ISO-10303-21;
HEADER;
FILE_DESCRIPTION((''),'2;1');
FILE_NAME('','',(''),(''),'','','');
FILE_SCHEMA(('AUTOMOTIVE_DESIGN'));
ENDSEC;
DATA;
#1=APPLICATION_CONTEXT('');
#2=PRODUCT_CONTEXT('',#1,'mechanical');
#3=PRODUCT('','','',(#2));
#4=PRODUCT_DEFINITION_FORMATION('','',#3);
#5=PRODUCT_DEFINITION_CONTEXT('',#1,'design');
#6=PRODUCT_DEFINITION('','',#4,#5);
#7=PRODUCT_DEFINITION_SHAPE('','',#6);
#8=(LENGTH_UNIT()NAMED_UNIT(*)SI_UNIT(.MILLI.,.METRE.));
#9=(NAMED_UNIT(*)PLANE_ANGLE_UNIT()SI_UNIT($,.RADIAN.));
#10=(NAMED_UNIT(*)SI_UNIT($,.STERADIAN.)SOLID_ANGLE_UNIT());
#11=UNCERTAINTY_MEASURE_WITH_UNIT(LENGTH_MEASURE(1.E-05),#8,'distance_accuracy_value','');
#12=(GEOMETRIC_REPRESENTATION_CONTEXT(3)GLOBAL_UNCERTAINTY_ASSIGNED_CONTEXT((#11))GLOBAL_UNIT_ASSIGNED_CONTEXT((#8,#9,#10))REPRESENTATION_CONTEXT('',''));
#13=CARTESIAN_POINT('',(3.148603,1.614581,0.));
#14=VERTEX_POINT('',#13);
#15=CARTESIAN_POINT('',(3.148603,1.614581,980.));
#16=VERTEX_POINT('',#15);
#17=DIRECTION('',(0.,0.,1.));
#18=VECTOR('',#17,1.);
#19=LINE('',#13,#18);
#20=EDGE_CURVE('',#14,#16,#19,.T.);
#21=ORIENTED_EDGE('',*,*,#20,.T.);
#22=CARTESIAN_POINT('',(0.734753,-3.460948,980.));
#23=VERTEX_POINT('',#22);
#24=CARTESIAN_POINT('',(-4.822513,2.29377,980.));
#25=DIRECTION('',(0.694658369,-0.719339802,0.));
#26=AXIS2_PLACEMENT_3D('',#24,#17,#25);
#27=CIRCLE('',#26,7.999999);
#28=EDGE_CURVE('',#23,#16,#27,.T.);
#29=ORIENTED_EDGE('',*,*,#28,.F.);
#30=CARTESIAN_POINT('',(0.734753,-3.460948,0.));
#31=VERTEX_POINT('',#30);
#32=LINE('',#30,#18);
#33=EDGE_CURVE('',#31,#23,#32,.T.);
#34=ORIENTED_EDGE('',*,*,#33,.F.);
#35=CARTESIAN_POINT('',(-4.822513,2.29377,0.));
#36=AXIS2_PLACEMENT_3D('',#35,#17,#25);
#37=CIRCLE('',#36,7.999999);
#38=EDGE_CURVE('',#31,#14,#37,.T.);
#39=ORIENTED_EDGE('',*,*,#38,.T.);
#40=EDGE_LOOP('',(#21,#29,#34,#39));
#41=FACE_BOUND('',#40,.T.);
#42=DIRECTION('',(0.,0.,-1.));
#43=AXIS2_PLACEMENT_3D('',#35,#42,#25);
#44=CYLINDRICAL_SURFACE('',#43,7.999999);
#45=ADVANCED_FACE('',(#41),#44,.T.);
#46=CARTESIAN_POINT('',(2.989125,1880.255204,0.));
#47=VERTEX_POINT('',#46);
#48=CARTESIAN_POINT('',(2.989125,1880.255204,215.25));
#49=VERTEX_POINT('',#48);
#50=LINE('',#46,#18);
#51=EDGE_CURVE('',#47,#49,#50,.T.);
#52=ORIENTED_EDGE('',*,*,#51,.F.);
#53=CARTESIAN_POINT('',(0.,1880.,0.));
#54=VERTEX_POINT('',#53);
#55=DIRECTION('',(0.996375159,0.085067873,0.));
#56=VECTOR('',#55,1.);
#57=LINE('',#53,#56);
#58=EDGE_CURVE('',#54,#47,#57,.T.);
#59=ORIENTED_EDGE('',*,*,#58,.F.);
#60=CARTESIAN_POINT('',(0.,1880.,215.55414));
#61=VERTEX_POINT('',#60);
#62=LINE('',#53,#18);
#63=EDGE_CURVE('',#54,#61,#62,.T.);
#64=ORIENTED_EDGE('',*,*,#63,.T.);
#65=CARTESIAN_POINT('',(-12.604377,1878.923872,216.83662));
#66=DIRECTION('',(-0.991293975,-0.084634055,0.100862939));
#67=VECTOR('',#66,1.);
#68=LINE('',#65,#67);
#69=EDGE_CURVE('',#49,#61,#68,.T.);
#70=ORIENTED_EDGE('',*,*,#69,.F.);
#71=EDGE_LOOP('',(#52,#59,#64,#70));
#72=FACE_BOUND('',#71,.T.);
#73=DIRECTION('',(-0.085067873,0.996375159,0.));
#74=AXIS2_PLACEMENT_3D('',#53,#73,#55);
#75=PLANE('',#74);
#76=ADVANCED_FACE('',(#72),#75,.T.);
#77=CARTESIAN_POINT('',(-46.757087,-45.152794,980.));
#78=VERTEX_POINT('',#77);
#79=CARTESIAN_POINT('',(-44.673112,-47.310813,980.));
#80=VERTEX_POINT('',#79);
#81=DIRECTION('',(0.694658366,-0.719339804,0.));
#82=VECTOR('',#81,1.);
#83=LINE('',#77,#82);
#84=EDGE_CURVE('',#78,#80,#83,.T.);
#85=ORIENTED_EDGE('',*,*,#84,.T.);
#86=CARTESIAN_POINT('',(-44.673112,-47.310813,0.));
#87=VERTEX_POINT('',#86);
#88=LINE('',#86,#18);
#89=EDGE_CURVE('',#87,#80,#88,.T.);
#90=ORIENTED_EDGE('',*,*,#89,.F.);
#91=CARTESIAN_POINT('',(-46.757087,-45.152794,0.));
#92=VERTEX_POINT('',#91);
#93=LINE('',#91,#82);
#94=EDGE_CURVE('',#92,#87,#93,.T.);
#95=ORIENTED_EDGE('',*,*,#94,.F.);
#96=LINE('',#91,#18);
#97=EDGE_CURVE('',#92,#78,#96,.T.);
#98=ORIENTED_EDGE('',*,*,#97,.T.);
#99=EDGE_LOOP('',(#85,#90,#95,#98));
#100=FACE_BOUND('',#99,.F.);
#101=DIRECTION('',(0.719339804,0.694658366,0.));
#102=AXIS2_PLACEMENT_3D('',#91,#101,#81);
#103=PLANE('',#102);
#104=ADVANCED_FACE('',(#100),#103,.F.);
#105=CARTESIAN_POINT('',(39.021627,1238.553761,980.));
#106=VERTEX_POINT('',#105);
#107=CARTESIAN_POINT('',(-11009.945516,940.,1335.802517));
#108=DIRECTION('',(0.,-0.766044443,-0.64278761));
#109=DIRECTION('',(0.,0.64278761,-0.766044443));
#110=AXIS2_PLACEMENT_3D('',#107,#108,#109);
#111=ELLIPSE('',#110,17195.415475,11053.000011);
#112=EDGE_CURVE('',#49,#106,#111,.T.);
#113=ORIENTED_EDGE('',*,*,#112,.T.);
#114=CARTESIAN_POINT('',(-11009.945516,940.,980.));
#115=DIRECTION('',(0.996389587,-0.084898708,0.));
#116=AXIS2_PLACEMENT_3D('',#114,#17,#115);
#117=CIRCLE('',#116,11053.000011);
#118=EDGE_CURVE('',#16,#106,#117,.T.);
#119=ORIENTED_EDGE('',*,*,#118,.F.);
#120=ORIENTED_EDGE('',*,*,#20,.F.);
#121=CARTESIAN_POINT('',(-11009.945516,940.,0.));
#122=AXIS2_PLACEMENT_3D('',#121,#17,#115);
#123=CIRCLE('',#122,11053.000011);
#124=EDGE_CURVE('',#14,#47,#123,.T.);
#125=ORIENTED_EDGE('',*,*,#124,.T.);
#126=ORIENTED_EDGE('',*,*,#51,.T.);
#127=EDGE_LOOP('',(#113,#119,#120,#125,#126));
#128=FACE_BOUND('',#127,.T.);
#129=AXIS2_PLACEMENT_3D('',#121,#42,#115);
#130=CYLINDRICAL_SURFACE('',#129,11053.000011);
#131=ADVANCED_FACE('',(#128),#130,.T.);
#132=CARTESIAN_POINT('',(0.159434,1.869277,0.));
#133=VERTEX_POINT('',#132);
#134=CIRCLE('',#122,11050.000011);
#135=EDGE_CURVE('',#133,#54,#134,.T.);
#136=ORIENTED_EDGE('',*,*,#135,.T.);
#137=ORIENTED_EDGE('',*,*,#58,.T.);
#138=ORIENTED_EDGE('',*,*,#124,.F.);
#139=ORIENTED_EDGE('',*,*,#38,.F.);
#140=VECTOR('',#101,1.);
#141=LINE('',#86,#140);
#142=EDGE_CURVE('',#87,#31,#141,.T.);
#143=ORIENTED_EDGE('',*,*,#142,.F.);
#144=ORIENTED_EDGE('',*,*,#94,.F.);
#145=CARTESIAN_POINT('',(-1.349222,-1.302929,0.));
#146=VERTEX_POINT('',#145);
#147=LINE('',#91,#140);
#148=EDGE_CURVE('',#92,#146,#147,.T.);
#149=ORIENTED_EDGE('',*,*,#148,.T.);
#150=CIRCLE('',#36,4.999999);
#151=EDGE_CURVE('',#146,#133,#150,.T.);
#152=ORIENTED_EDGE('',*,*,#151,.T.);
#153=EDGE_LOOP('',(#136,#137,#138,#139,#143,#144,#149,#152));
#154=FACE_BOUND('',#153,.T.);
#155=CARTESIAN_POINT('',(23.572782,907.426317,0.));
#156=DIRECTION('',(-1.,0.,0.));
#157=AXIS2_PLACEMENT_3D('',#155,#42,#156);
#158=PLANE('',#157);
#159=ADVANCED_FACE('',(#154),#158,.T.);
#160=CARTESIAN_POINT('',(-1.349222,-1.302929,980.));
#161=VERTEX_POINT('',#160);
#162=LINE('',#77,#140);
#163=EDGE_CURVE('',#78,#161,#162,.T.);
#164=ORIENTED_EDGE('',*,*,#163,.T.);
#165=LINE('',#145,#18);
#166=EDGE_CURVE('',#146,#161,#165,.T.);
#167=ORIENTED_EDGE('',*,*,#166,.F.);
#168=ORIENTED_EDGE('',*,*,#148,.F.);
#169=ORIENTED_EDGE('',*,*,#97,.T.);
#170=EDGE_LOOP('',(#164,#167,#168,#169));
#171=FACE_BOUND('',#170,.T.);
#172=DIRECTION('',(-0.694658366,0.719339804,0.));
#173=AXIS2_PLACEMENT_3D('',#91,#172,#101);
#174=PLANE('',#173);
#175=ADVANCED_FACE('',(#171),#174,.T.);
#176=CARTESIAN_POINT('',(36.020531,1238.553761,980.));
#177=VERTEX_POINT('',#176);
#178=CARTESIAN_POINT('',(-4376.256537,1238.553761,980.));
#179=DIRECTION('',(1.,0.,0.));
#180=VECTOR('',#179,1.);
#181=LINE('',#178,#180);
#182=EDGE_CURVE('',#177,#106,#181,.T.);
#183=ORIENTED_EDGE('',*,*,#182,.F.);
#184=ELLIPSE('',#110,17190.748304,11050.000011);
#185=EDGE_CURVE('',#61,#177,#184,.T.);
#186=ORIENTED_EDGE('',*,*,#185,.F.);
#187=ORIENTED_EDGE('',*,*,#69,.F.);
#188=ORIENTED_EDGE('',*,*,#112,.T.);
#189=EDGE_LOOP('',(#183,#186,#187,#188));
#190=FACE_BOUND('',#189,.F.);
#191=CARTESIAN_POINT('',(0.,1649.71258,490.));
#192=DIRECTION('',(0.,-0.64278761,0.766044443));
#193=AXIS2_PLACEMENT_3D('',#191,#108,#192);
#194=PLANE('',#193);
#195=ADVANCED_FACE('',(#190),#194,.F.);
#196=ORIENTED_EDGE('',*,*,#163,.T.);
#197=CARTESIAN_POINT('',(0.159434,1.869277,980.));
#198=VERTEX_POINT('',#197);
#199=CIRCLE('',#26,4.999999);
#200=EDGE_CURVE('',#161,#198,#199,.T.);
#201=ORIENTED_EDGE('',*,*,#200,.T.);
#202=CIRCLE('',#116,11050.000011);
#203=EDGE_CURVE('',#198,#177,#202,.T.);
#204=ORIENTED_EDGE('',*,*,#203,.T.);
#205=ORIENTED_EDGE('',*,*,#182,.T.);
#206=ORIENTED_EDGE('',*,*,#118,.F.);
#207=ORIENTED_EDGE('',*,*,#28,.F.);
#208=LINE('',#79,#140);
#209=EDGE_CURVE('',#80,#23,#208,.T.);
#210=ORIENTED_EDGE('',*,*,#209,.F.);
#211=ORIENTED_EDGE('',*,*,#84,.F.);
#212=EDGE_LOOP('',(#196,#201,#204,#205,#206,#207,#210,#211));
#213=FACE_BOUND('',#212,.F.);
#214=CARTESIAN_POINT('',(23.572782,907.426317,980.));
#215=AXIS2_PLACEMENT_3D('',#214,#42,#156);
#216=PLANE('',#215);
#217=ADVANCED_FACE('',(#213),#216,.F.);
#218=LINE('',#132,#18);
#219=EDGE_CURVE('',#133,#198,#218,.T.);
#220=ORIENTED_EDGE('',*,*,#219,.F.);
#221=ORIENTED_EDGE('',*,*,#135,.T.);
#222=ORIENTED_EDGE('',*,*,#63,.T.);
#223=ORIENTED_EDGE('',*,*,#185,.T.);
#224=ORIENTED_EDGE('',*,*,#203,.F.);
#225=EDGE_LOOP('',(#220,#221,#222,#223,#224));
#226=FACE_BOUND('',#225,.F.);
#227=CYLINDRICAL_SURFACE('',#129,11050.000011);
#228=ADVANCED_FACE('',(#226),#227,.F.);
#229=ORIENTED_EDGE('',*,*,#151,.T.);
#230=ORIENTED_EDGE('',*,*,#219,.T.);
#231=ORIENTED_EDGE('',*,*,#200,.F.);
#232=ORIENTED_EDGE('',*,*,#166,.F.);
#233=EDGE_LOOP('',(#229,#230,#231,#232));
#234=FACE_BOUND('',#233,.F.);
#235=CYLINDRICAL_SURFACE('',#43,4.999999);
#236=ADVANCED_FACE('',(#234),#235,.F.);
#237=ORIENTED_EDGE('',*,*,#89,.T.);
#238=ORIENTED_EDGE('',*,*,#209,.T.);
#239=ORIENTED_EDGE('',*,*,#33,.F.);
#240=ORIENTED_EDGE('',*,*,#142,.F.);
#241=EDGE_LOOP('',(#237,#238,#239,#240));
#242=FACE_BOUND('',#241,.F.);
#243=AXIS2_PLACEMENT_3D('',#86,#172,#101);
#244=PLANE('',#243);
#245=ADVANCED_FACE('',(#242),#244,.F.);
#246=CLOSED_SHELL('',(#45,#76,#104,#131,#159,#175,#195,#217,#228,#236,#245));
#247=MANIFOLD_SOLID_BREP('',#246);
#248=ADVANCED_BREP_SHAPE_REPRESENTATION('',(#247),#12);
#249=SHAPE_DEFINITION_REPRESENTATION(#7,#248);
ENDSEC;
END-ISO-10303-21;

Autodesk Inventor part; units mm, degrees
ref_plane "YZ Plane" through (0, 0, 0) normal (1, 0, 0) x (0, 1, 0)
ref_plane "XZ Plane" through (0, 0, 0) normal (0, 1, 0) x (-1, 0, 0)
ref_plane "XY Plane" through (0, 0, 0) normal (0, 0, 1) x (1, 0, 0)
sketch "Sketch1" plane through (0, 0, 0) normal (0, 0, 1) x (1, 0, 0)
  line L0 (440.770723, -684.385341) -> (440.770723, -734.385341) construction
  line L1 (0, 47) -> (0, 0) construction
  arc A0 (0.159434, 1.869277) -> (0, 1880) centre (-11009.945504, 940) ccw
  arc A1 (0, 0) -> (0.159434, 1.869277) centre (-11009.945504, 940) ccw construction
  arc A2 (-1.349222, -1.302929) -> (0.159434, 1.869277) centre (-4.822514, 2.29377) ccw
  line L2 (-1.349222, -1.302929) -> (0, 0) construction
  line L3 (-46.757087, -45.152794) -> (-1.349222, -1.302929)
  line L4 (-41.190716, -50.91694) -> (-46.757087, -45.152794) construction
  line L5 (0, 0) -> (0, 1880) construction
  line L6 (0, 0) -> (1.875639, 0) construction
  dimension "d154" = 5
  dimension "d155" = 65
  dimension "d156" = 11050
  dimension "d157" = 136
  dimension "d158" = 1880
contour flange "Contour Flange2" sketch "Sketch1" thickness 3 bend radius 3 width 980 along (0, 0, 1) mid plane no both sides no wall seen from (-24.053155, -23.227861, 0) lies toward (0.6946584, -0.7193398, 0) curves L3 A2 A0
bend "Bend2"
corner "Corner2"
sketch "Sketch6" plane through (0, 0, 0) normal (1, 0, 0) x (0, 1, 0)
  line L0 (1.869277, 0) -> (1.869277, 980)
  line L1 (1880, 980) -> (1.869277, 980)
  line L2 (1.869277, 0) -> (1880, 0)
  line L3 (1880.255204, 980) -> (1880, 980)
  line L4 (1880.255204, 0) -> (1880.255204, 980)
  line L5 (1880.255204, 0) -> (1880, 0)
  line L6 (1238.553761, 0) -> (1880.255204, 764.75)
  line L7 (1880.255204, 215.25) -> (1238.553761, 980)
  point P0 (0, 0)
  dimension "d160" = 40
  dimension "d161" = 215.25
extrude "Extrusion3" cut sketch "Sketch6" along normal through all both and the other way through all contours L1 L3 L4 L6 L7 | L6 L4 L7
sketch "Sketch7" plane through (-1.349222, -1.302929, 980) normal (-0.6946584, 0.7193398, 0) x (0.7193398, 0.6946584, 0)
  line L0 (-83.025107, 17.798613) -> (-83.025107, 187.19296) construction
  line L1 (-83.025107, 187.19296) -> (-68.508178, 187.19296) construction
  line L2 (-68.508178, 187.19296) -> (-68.508178, 17.798613) construction
  line L3 (-68.508178, 17.798613) -> (-83.025107, 17.798613) construction
  point P0 (1.875639, 980)
feature "Mark5" [suppressed]
equation "\"d36\" = Thickness"
equation "\"d37\" = BendReliefWidth"
equation "\"d38\" = BendReliefDepth"
equation "\"d39\" = MinimumRemnant"
equation "\"d40\" = TransitionRadius"
equation "\"d42\" = BendRadius"
equation "\"d44\" = CornerReliefSize"
equation "\"d45\" = GapSize"
equation "\"d46\" = JacobiRadiusSize"
equation "\"BendRadius\" = Thickness"
equation "\"BendReliefWidth\" = Thickness"
equation "\"BendReliefDepth\" = 0.5 * Thickness"
equation "\"CornerReliefSize\" = 4 * Thickness"
equation "\"MinimumRemnant\" = 2 * Thickness"
equation "\"TransitionRadius\" = BendRadius"
equation "\"JacobiRadiusSize\" = BendRadius"
equation "\"GapSize\" = Thickness"
equation "\"Thickness\" = 3"
properties part number "MSC 310 sheet left board withers" material "AISI304"
